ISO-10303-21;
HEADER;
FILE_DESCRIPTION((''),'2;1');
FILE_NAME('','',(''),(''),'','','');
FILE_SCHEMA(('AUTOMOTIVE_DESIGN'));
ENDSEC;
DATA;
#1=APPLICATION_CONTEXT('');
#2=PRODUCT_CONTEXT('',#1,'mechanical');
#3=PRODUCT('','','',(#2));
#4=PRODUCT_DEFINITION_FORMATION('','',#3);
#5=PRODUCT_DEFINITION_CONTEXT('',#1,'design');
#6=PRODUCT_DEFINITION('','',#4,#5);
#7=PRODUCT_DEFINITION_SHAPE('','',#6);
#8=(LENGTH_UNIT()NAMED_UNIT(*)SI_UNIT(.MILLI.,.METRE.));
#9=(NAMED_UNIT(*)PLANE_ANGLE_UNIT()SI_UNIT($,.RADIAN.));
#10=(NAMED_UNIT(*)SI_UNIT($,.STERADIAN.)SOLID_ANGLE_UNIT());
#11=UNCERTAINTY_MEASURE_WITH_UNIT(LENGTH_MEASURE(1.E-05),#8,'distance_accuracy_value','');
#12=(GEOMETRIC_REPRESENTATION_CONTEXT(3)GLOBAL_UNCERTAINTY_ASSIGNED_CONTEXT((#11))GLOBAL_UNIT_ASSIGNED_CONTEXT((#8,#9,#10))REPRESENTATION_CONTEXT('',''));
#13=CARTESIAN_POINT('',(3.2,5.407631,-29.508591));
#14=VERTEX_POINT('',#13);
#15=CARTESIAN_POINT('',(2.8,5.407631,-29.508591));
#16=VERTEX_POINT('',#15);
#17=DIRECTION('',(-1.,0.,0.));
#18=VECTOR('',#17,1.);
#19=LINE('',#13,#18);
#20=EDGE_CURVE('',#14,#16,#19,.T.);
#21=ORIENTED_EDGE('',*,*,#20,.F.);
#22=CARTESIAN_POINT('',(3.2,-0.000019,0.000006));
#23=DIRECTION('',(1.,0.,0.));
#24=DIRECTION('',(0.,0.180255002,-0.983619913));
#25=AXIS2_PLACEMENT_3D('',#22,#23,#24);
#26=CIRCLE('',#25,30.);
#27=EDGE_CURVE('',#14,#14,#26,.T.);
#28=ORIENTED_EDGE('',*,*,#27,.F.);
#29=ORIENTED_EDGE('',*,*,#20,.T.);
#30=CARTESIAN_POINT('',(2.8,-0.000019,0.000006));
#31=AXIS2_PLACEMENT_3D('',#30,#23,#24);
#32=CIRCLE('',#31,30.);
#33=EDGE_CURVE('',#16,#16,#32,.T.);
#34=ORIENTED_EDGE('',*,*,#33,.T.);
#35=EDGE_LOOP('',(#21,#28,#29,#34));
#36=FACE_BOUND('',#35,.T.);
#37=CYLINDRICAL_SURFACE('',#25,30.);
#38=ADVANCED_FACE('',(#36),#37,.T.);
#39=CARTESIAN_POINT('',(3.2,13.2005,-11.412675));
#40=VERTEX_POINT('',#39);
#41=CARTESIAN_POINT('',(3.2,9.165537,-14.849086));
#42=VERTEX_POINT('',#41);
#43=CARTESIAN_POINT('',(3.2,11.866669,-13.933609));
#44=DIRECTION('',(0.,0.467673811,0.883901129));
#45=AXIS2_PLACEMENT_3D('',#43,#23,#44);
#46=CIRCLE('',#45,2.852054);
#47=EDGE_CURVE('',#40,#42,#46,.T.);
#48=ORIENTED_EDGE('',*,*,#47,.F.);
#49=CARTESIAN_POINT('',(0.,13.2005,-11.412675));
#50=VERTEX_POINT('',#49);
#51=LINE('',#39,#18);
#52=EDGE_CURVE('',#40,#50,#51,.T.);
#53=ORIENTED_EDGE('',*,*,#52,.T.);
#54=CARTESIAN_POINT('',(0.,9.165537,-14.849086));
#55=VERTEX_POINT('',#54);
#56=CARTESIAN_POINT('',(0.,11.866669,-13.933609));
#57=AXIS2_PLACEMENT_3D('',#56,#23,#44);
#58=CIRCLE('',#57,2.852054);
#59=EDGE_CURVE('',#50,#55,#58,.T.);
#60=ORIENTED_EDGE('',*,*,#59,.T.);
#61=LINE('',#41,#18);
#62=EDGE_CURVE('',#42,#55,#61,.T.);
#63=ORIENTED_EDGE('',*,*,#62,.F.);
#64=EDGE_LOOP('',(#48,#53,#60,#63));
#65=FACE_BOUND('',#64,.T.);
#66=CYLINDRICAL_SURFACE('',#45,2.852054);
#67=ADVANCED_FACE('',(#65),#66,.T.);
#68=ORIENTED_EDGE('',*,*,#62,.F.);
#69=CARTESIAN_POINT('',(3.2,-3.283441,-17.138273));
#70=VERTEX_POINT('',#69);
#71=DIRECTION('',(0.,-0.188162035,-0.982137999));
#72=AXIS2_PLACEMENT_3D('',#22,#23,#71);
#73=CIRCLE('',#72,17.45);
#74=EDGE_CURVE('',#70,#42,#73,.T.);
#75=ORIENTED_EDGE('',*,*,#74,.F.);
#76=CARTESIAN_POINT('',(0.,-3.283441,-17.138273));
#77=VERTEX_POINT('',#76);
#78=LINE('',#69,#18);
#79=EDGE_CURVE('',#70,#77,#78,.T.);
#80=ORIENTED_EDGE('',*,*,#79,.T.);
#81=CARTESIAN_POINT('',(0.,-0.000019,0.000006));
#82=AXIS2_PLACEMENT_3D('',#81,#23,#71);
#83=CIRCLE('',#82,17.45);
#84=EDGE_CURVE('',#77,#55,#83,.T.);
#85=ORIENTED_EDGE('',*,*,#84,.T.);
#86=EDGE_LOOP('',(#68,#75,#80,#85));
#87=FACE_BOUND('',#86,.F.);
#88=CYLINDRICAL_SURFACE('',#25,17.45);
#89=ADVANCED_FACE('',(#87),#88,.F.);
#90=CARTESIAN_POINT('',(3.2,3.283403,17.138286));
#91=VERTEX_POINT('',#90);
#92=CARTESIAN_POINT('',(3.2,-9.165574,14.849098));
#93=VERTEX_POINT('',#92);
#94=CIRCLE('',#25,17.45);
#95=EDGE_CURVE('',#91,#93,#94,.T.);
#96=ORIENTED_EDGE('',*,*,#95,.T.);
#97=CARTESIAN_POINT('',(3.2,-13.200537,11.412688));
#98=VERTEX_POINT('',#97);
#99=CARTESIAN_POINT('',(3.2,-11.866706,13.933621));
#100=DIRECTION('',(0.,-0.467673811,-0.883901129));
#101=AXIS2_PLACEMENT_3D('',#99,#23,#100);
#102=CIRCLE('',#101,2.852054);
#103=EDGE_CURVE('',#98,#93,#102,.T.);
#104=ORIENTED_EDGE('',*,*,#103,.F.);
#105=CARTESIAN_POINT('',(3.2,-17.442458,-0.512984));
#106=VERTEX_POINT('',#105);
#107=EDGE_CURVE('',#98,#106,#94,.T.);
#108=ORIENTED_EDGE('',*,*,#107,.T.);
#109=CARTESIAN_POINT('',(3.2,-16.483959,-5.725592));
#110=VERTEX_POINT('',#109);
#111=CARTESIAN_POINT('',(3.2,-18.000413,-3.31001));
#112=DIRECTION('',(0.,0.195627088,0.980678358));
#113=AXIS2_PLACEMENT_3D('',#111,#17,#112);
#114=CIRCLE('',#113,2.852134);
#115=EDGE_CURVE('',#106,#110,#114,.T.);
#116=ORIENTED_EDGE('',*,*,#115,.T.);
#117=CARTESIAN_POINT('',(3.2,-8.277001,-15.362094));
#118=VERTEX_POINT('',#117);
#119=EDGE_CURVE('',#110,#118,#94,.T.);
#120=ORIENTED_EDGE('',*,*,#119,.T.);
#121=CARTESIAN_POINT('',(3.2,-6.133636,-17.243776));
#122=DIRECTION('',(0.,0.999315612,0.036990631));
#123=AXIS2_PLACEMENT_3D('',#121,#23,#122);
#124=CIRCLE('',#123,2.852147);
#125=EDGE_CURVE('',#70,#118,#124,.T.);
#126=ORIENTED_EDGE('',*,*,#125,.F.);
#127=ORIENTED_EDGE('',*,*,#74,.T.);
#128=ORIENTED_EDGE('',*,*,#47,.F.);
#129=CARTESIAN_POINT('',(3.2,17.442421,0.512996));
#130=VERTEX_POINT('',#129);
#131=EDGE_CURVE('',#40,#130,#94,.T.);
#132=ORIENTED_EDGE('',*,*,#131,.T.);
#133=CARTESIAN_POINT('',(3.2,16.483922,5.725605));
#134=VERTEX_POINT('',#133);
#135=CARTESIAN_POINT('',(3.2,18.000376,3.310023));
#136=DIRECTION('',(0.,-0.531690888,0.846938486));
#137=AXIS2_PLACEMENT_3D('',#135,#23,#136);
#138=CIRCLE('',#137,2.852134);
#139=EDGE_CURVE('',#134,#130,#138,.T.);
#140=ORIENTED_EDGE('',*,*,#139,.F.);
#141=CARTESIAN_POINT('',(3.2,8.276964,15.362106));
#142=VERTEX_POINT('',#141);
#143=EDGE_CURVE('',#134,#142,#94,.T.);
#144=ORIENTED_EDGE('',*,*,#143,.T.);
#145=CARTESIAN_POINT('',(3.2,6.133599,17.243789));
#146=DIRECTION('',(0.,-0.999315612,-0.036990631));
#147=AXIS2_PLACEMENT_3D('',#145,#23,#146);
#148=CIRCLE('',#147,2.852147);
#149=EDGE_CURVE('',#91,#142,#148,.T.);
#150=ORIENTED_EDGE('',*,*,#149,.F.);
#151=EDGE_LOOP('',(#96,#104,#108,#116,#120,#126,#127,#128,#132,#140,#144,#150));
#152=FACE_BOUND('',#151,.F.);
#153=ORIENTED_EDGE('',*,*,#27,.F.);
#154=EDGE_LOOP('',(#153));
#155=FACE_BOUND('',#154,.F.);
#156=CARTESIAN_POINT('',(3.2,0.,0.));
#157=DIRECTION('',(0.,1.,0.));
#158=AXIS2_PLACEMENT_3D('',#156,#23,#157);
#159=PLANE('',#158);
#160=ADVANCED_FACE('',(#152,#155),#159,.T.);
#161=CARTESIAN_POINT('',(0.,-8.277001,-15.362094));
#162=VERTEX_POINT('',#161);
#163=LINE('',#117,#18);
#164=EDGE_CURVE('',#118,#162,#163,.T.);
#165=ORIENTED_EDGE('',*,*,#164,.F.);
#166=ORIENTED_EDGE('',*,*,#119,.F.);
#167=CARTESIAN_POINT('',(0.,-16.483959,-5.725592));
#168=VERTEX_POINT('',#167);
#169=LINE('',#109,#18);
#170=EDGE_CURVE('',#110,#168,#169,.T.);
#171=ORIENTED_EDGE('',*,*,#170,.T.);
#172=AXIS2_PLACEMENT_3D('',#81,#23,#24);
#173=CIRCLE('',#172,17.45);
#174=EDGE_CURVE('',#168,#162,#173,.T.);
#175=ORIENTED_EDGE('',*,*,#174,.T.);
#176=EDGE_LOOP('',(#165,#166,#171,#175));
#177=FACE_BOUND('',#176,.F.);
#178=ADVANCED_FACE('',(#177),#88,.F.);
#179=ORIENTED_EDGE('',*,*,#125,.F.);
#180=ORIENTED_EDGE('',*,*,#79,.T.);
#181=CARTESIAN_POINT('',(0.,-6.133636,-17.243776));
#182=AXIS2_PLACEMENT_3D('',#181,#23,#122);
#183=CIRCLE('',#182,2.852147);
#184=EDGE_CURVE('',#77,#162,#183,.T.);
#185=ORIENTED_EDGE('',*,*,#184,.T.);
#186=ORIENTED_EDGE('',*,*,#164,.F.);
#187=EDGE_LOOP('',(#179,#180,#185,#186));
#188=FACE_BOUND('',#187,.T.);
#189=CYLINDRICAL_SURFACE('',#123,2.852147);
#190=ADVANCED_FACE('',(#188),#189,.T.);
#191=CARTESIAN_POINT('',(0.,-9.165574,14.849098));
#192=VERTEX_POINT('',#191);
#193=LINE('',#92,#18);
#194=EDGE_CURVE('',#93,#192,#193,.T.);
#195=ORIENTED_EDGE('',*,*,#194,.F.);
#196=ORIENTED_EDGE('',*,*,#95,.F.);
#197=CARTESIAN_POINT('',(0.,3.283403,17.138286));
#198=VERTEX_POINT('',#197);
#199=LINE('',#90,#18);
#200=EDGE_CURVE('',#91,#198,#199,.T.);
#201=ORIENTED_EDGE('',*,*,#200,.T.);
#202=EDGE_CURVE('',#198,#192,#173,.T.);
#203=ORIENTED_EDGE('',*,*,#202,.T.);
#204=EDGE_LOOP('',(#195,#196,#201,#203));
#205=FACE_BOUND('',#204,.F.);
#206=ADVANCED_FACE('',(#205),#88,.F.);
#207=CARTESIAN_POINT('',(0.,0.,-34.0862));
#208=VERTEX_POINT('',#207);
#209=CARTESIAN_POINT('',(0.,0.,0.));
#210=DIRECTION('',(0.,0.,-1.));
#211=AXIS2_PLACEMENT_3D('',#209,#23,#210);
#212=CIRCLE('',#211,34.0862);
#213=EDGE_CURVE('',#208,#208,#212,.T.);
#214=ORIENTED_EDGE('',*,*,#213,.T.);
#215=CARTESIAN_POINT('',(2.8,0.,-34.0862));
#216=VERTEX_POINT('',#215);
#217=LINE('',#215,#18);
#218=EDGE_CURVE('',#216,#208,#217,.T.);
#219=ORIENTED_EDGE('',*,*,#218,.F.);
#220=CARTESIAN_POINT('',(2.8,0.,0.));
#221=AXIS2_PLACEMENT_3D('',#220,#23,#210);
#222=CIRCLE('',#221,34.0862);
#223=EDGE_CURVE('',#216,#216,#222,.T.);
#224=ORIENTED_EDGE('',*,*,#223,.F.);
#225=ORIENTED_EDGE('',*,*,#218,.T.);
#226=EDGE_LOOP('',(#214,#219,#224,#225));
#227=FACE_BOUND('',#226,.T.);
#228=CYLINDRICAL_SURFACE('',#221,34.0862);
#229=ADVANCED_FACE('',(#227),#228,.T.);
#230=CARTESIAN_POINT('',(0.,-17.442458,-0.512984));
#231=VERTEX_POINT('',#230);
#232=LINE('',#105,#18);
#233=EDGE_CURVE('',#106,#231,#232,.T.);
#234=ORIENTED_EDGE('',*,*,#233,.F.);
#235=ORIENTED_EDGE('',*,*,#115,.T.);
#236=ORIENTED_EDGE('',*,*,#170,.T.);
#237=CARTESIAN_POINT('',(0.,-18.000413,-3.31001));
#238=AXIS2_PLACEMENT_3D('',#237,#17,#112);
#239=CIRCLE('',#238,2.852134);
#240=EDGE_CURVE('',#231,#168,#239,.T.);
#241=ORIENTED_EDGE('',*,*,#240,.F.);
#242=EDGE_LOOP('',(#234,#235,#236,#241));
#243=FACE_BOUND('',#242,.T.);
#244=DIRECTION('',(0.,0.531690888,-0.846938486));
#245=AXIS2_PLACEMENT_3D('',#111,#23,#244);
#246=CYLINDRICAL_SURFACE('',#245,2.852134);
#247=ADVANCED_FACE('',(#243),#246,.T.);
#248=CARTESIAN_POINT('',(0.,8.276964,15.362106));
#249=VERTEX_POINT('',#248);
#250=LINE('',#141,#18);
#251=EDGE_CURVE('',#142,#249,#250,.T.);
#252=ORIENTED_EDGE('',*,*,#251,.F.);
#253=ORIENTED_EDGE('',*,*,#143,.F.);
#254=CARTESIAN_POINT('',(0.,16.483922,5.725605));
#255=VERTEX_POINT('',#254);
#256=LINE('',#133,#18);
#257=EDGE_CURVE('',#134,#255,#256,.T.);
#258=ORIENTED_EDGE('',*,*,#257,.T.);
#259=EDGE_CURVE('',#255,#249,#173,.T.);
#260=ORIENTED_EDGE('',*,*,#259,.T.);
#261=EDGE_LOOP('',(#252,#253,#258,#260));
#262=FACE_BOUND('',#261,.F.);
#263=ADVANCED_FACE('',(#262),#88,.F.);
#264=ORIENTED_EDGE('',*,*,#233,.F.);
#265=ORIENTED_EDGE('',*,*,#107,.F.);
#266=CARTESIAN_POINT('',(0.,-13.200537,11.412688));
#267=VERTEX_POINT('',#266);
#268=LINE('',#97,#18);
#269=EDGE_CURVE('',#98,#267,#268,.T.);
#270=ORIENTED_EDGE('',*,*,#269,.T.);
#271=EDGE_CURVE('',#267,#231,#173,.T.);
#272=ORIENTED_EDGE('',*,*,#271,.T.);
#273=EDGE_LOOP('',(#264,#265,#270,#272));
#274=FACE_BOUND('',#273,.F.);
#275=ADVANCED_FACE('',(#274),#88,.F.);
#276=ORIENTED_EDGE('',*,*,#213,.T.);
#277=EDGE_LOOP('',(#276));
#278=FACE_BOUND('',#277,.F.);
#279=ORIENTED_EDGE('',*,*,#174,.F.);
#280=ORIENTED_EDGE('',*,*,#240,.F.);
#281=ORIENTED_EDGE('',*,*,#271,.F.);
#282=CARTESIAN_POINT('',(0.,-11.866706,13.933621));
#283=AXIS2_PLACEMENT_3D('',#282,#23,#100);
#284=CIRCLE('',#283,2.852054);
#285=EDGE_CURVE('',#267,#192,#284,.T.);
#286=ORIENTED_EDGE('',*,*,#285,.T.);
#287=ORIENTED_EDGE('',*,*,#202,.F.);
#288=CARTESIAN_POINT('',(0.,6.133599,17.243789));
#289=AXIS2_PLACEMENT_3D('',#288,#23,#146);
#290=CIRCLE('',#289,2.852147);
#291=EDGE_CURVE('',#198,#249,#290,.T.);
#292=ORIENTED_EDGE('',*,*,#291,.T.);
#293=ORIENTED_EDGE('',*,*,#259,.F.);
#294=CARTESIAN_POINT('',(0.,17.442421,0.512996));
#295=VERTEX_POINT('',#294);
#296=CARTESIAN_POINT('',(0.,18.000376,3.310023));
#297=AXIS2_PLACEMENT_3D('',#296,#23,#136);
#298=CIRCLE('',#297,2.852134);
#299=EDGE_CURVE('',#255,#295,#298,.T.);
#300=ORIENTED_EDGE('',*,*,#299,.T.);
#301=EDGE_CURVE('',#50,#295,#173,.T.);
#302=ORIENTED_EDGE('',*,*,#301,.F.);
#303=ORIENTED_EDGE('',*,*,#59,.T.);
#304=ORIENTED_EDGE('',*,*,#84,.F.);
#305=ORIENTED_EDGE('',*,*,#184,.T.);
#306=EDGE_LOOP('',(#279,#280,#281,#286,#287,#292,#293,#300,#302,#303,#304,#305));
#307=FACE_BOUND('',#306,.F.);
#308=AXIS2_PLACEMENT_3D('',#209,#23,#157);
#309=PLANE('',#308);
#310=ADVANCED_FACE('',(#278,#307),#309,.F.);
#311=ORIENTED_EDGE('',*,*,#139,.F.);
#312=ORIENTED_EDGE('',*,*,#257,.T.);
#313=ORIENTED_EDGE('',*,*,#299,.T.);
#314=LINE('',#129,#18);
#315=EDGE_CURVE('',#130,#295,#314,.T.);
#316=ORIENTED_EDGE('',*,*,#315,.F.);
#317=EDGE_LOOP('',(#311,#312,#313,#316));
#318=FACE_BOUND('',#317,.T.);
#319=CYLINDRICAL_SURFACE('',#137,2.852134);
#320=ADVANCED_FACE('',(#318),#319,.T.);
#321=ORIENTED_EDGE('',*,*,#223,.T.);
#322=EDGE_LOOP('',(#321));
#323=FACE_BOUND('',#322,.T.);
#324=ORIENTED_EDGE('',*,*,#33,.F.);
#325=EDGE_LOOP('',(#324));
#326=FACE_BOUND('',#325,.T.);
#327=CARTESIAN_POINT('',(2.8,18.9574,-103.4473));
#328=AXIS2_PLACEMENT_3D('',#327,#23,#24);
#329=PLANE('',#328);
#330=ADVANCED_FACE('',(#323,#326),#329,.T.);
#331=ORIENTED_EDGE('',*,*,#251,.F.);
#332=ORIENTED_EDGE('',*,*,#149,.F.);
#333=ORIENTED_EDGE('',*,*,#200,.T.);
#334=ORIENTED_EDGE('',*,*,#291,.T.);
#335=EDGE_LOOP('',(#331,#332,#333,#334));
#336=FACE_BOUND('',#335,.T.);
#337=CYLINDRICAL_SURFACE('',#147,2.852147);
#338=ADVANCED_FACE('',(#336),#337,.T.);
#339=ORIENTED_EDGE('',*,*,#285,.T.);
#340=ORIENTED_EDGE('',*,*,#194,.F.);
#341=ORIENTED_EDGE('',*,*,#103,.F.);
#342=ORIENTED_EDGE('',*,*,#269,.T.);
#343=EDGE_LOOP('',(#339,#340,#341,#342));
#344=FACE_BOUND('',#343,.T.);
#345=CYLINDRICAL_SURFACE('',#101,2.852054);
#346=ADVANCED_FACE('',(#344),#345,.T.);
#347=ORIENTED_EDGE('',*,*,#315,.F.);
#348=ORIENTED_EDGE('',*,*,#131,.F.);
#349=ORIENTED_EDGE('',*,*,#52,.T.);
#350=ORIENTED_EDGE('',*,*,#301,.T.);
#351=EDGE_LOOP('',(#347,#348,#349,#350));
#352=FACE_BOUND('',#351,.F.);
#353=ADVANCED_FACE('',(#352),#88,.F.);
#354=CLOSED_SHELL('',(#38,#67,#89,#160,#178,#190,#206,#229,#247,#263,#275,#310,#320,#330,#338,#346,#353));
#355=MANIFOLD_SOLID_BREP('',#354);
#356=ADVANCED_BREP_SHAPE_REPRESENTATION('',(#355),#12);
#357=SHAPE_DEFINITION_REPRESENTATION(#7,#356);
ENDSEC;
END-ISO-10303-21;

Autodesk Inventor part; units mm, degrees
ref_plane "YZ Plane" through (0, 0, 0) normal (1, 0, 0) x (0, 1, 0)
ref_plane "XZ Plane" through (0, 0, 0) normal (0, 1, 0) x (-1, 0, 0)
ref_plane "XY Plane" through (0, 0, 0) normal (0, 0, 1) x (1, 0, 0)
sketch "Sketch_1" plane through (0, 0, 0) normal (0, 0, 1) x (1, 0, 0)
  line L0 (7.2, 0) -> (0, 0)
  line L1 (0, 8.5) -> (3.2, 8.5)
  line L2 (3.2, 8.5) -> (3.2, 105.8394)
  arc A0 (3.2, 105.8394) -> (2.2899, 109) centre (-4.7294, 105.2675) ccw
  line L3 (2.2899, 109) -> (0.7899, 109)
  arc A1 (0.7899, 109) -> (0, 105.8394) centre (7.9441, 105.5329) ccw
  line L4 (0, 105.8394) -> (0, 8.5)
  dimension "d16" = 1.5
  dimension "d17" = 3.2
revolve "Revolution1" add sketch "Sketch_1" angle 360 about axis through (7.2, 0, 0) along (1, 0, 0)
sketch "Sketch_2" plane through (3.6, 0, 0) normal (1, 0, 0) x (0, 0, -1)
  circle A0 centre (0, 0) radius 145.3333
  arc A1 (-108.9989, 0.5) -> (-108.9989, -0.5) centre (0, 0) ccw
  line L0 (-108.9989, -0.5) -> (-103.5248, -2.6502)
  arc A2 (-103.0895, -9.8477) -> (-103.5248, -2.6502) centre (-104.9781, -6.35) ccw
  line L1 (-103.0895, -9.8477) -> (-108.2644, -12.642)
  arc A3 (-108.2644, -12.642) -> (-108.1439, -13.6347) centre (0, 0) ccw
  line L2 (-108.1439, -13.6347) -> (-102.4506, -15.1094)
  arc A4 (-101.1508, -22.2019) -> (-102.4506, -15.1094) centre (-103.4473, -18.9574) ccw
  line L3 (-101.1508, -22.2019) -> (-105.9512, -25.5997)
  arc A5 (-105.9512, -25.5997) -> (-105.7119, -26.5706) centre (0, 0) ccw
  line L4 (-105.7119, -26.5706) -> (-99.8824, -27.3483)
  arc A6 (-97.7372, -34.2324) -> (-99.8824, -27.3483) centre (-100.408, -31.2884) ccw
  line L5 (-97.7372, -34.2324) -> (-102.093, -38.184)
  arc A7 (-102.093, -38.184) -> (-101.7384, -39.119) centre (0, 0) ccw
  line L6 (-101.7384, -39.119) -> (-95.8576, -39.1884)
  arc A8 (-92.8983, -45.7638) -> (-95.8576, -39.1884) centre (-95.9045, -43.1631) ccw
  line L7 (-92.8983, -45.7638) -> (-96.7461, -50.2116)
  arc A9 (-96.7461, -50.2116) -> (-96.2813, -51.097) centre (0, 0) ccw
  line L8 (-96.2813, -51.097) -> (-90.4351, -50.457)
  arc A10 (-86.7048, -56.6277) -> (-90.4351, -50.457) centre (-90.0025, -54.4084) ccw
  line L9 (-86.7048, -56.6277) -> (-89.9883, -61.5069)
  arc A11 (-89.9883, -61.5069) -> (-89.4203, -62.3299) centre (0, 0) ccw
  line L10 (-89.4203, -62.3299) -> (-83.6938, -60.9899)
  arc A12 (-79.2469, -66.666) -> (-83.6938, -60.9899) centre (-82.7881, -64.8603) ccw
  line L11 (-79.2469, -66.666) -> (-81.9184, -71.9054)
  arc A13 (-81.9184, -71.9054) -> (-81.2553, -72.6539) centre (0, 0) ccw
  line L12 (-81.2553, -72.6539) -> (-75.732, -70.6334)
  arc A14 (-70.6334, -75.732) -> (-75.732, -70.6334) centre (-74.3664, -74.3664) ccw
  line L13 (-70.6334, -75.732) -> (-72.6539, -81.2553)
  arc A15 (-72.6539, -81.2553) -> (-71.9054, -81.9184) centre (0, 0) ccw
  line L14 (-71.9054, -81.9184) -> (-66.666, -79.2469)
  arc A16 (-60.9899, -83.6938) -> (-66.666, -79.2469) centre (-64.8603, -82.7881) ccw
  line L15 (-60.9899, -83.6938) -> (-62.3299, -89.4203)
  arc A17 (-62.3299, -89.4203) -> (-61.5069, -89.9883) centre (0, 0) ccw
  line L16 (-61.5069, -89.9883) -> (-56.6277, -86.7048)
  arc A18 (-50.457, -90.4351) -> (-56.6277, -86.7048) centre (-54.4084, -90.0025) ccw
  line L17 (-50.457, -90.4351) -> (-51.097, -96.2813)
  arc A19 (-51.097, -96.2813) -> (-50.2116, -96.7461) centre (0, 0) ccw
  line L18 (-50.2116, -96.7461) -> (-45.7638, -92.8983)
  arc A20 (-39.1884, -95.8576) -> (-45.7638, -92.8983) centre (-43.1631, -95.9045) ccw
  line L19 (-39.1884, -95.8576) -> (-39.119, -101.7384)
  arc A21 (-39.119, -101.7384) -> (-38.184, -102.093) centre (0, 0) ccw
  line L20 (-38.184, -102.093) -> (-34.2324, -97.7372)
  arc A22 (-27.3483, -99.8824) -> (-34.2324, -97.7372) centre (-31.2884, -100.408) ccw
  line L21 (-27.3483, -99.8824) -> (-26.5706, -105.7119)
  arc A23 (-26.5706, -105.7119) -> (-25.5997, -105.9512) centre (0, 0) ccw
  line L22 (-25.5997, -105.9512) -> (-22.2019, -101.1508)
  arc A24 (-15.1094, -102.4506) -> (-22.2019, -101.1508) centre (-18.9574, -103.4473) ccw
  line L23 (-15.1094, -102.4506) -> (-13.6347, -108.1439)
  arc A25 (-13.6347, -108.1439) -> (-12.642, -108.2644) centre (0, 0) ccw
  line L24 (-12.642, -108.2644) -> (-9.8477, -103.0895)
  arc A26 (-2.6502, -103.5248) -> (-9.8477, -103.0895) centre (-6.35, -104.9781) ccw
  line L25 (-2.6502, -103.5248) -> (-0.5, -108.9989)
  arc A27 (-0.5, -108.9989) -> (0.5, -108.9989) centre (0, 0) ccw
  line L26 (0.5, -108.9989) -> (2.6502, -103.5248)
  arc A28 (9.8477, -103.0895) -> (2.6502, -103.5248) centre (6.35, -104.9781) ccw
  line L27 (9.8477, -103.0895) -> (12.642, -108.2644)
  arc A29 (12.642, -108.2644) -> (13.6347, -108.1439) centre (0, 0) ccw
  line L28 (13.6347, -108.1439) -> (15.1094, -102.4506)
  arc A30 (22.2019, -101.1508) -> (15.1094, -102.4506) centre (18.9574, -103.4473) ccw
  line L29 (22.2019, -101.1508) -> (25.5997, -105.9512)
  arc A31 (25.5997, -105.9512) -> (26.5706, -105.7119) centre (0, 0) ccw
  line L30 (26.5706, -105.7119) -> (27.3483, -99.8824)
  arc A32 (34.2324, -97.7372) -> (27.3483, -99.8824) centre (31.2884, -100.408) ccw
  line L31 (34.2324, -97.7372) -> (38.184, -102.093)
  arc A33 (38.184, -102.093) -> (39.119, -101.7384) centre (0, 0) ccw
  line L32 (39.119, -101.7384) -> (39.1884, -95.8576)
  arc A34 (45.7638, -92.8983) -> (39.1884, -95.8576) centre (43.1631, -95.9045) ccw
  line L33 (45.7638, -92.8983) -> (50.2116, -96.7461)
  arc A35 (50.2116, -96.7461) -> (51.097, -96.2813) centre (0, 0) ccw
  line L34 (51.097, -96.2813) -> (50.457, -90.4351)
  arc A36 (56.6277, -86.7048) -> (50.457, -90.4351) centre (54.4084, -90.0025) ccw
  line L35 (56.6277, -86.7048) -> (61.5069, -89.9883)
  arc A37 (61.5069, -89.9883) -> (62.3299, -89.4203) centre (0, 0) ccw
  line L36 (62.3299, -89.4203) -> (60.9899, -83.6938)
  arc A38 (66.666, -79.2469) -> (60.9899, -83.6938) centre (64.8603, -82.7881) ccw
  line L37 (66.666, -79.2469) -> (71.9054, -81.9184)
  arc A39 (71.9054, -81.9184) -> (72.6539, -81.2553) centre (0, 0) ccw
  line L38 (72.6539, -81.2553) -> (70.6334, -75.732)
  arc A40 (75.732, -70.6334) -> (70.6334, -75.732) centre (74.3664, -74.3664) ccw
  line L39 (75.732, -70.6334) -> (81.2553, -72.6539)
  arc A41 (81.2553, -72.6539) -> (81.9184, -71.9054) centre (0, 0) ccw
  line L40 (81.9184, -71.9054) -> (79.2469, -66.666)
  arc A42 (83.6938, -60.9899) -> (79.2469, -66.666) centre (82.7881, -64.8603) ccw
  line L41 (83.6938, -60.9899) -> (89.4203, -62.3299)
  arc A43 (89.4203, -62.3299) -> (89.9883, -61.5069) centre (0, 0) ccw
  line L42 (89.9883, -61.5069) -> (86.7048, -56.6277)
  arc A44 (90.4351, -50.457) -> (86.7048, -56.6277) centre (90.0025, -54.4084) ccw
  line L43 (90.4351, -50.457) -> (96.2813, -51.097)
  arc A45 (96.2813, -51.097) -> (96.7461, -50.2116) centre (0, 0) ccw
  line L44 (96.7461, -50.2116) -> (92.8983, -45.7638)
  arc A46 (95.8576, -39.1884) -> (92.8983, -45.7638) centre (95.9045, -43.1631) ccw
  line L45 (95.8576, -39.1884) -> (101.7384, -39.119)
  arc A47 (101.7384, -39.119) -> (102.093, -38.184) centre (0, 0) ccw
  line L46 (102.093, -38.184) -> (97.7372, -34.2324)
  arc A48 (99.8824, -27.3483) -> (97.7372, -34.2324) centre (100.408, -31.2884) ccw
  line L47 (99.8824, -27.3483) -> (105.7119, -26.5706)
  arc A49 (105.7119, -26.5706) -> (105.9512, -25.5997) centre (0, 0) ccw
  line L48 (105.9512, -25.5997) -> (101.1508, -22.2019)
  arc A50 (102.4506, -15.1094) -> (101.1508, -22.2019) centre (103.4473, -18.9574) ccw
  line L49 (102.4506, -15.1094) -> (108.1439, -13.6347)
  arc A51 (108.1439, -13.6347) -> (108.2644, -12.642) centre (0, 0) ccw
  line L50 (108.2644, -12.642) -> (103.0895, -9.8477)
  arc A52 (103.5248, -2.6502) -> (103.0895, -9.8477) centre (104.9781, -6.35) ccw
  line L51 (103.5248, -2.6502) -> (108.9989, -0.5)
  arc A53 (108.9989, -0.5) -> (108.9989, 0.5) centre (0, 0) ccw
  line L52 (108.9989, 0.5) -> (103.5248, 2.6502)
  arc A54 (103.0895, 9.8477) -> (103.5248, 2.6502) centre (104.9781, 6.35) ccw
  line L53 (103.0895, 9.8477) -> (108.2644, 12.642)
  arc A55 (108.2644, 12.642) -> (108.1439, 13.6347) centre (0, 0) ccw
  line L54 (108.1439, 13.6347) -> (102.4506, 15.1094)
  arc A56 (101.1508, 22.2019) -> (102.4506, 15.1094) centre (103.4473, 18.9574) ccw
  line L55 (101.1508, 22.2019) -> (105.9512, 25.5997)
  arc A57 (105.9512, 25.5997) -> (105.7119, 26.5706) centre (0, 0) ccw
  line L56 (105.7119, 26.5706) -> (99.8824, 27.3483)
  arc A58 (97.7372, 34.2324) -> (99.8824, 27.3483) centre (100.408, 31.2884) ccw
  line L57 (97.7372, 34.2324) -> (102.093, 38.184)
  arc A59 (102.093, 38.184) -> (101.7384, 39.119) centre (0, 0) ccw
  line L58 (101.7384, 39.119) -> (95.8576, 39.1884)
  arc A60 (92.8983, 45.7638) -> (95.8576, 39.1884) centre (95.9045, 43.1631) ccw
  line L59 (92.8983, 45.7638) -> (96.7461, 50.2116)
  arc A61 (96.7461, 50.2116) -> (96.2813, 51.097) centre (0, 0) ccw
  line L60 (96.2813, 51.097) -> (90.4351, 50.457)
  arc A62 (86.7048, 56.6277) -> (90.4351, 50.457) centre (90.0025, 54.4084) ccw
  line L61 (86.7048, 56.6277) -> (89.9883, 61.5069)
  arc A63 (89.9883, 61.5069) -> (89.4203, 62.3299) centre (0, 0) ccw
  line L62 (89.4203, 62.3299) -> (83.6938, 60.9899)
  arc A64 (79.2469, 66.666) -> (83.6938, 60.9899) centre (82.7881, 64.8603) ccw
  line L63 (79.2469, 66.666) -> (81.9184, 71.9054)
  arc A65 (81.9184, 71.9054) -> (81.2553, 72.6539) centre (0, 0) ccw
  line L64 (81.2553, 72.6539) -> (75.732, 70.6334)
  arc A66 (70.6334, 75.732) -> (75.732, 70.6334) centre (74.3664, 74.3664) ccw
  line L65 (70.6334, 75.732) -> (72.6539, 81.2553)
  arc A67 (72.6539, 81.2553) -> (71.9054, 81.9184) centre (0, 0) ccw
  line L66 (71.9054, 81.9184) -> (66.666, 79.2469)
  arc A68 (60.9899, 83.6938) -> (66.666, 79.2469) centre (64.8603, 82.7881) ccw
  line L67 (60.9899, 83.6938) -> (62.3299, 89.4203)
  arc A69 (62.3299, 89.4203) -> (61.5069, 89.9883) centre (0, 0) ccw
  line L68 (61.5069, 89.9883) -> (56.6277, 86.7048)
  arc A70 (50.457, 90.4351) -> (56.6277, 86.7048) centre (54.4084, 90.0025) ccw
  line L69 (50.457, 90.4351) -> (51.097, 96.2813)
  arc A71 (51.097, 96.2813) -> (50.2116, 96.7461) centre (0, 0) ccw
  line L70 (50.2116, 96.7461) -> (45.7638, 92.8983)
  arc A72 (39.1884, 95.8576) -> (45.7638, 92.8983) centre (43.1631, 95.9045) ccw
  line L71 (39.1884, 95.8576) -> (39.119, 101.7384)
  arc A73 (39.119, 101.7384) -> (38.184, 102.093) centre (0, 0) ccw
  line L72 (38.184, 102.093) -> (34.2324, 97.7372)
  arc A74 (27.3483, 99.8824) -> (34.2324, 97.7372) centre (31.2884, 100.408) ccw
  line L73 (27.3483, 99.8824) -> (26.5706, 105.7119)
  arc A75 (26.5706, 105.7119) -> (25.5997, 105.9512) centre (0, 0) ccw
  line L74 (25.5997, 105.9512) -> (22.2019, 101.1508)
  arc A76 (15.1094, 102.4506) -> (22.2019, 101.1508) centre (18.9574, 103.4473) ccw
  line L75 (15.1094, 102.4506) -> (13.6347, 108.1439)
  arc A77 (13.6347, 108.1439) -> (12.642, 108.2644) centre (0, 0) ccw
  line L76 (12.642, 108.2644) -> (9.8477, 103.0895)
  arc A78 (2.6502, 103.5248) -> (9.8477, 103.0895) centre (6.35, 104.9781) ccw
  line L77 (2.6502, 103.5248) -> (0.5, 108.9989)
  arc A79 (0.5, 108.9989) -> (-0.5, 108.9989) centre (0, 0) ccw
  line L78 (-0.5, 108.9989) -> (-2.6502, 103.5248)
  arc A80 (-9.8477, 103.0895) -> (-2.6502, 103.5248) centre (-6.35, 104.9781) ccw
  line L79 (-9.8477, 103.0895) -> (-12.642, 108.2644)
  arc A81 (-12.642, 108.2644) -> (-13.6347, 108.1439) centre (0, 0) ccw
  line L80 (-13.6347, 108.1439) -> (-15.1094, 102.4506)
  arc A82 (-22.2019, 101.1508) -> (-15.1094, 102.4506) centre (-18.9574, 103.4473) ccw
  line L81 (-22.2019, 101.1508) -> (-25.5997, 105.9512)
  arc A83 (-25.5997, 105.9512) -> (-26.5706, 105.7119) centre (0, 0) ccw
  line L82 (-26.5706, 105.7119) -> (-27.3483, 99.8824)
  arc A84 (-34.2324, 97.7372) -> (-27.3483, 99.8824) centre (-31.2884, 100.408) ccw
  line L83 (-34.2324, 97.7372) -> (-38.184, 102.093)
  arc A85 (-38.184, 102.093) -> (-39.119, 101.7384) centre (0, 0) ccw
  line L84 (-39.119, 101.7384) -> (-39.1884, 95.8576)
  arc A86 (-45.7638, 92.8983) -> (-39.1884, 95.8576) centre (-43.1631, 95.9045) ccw
  line L85 (-45.7638, 92.8983) -> (-50.2116, 96.7461)
  arc A87 (-50.2116, 96.7461) -> (-51.097, 96.2813) centre (0, 0) ccw
  line L86 (-51.097, 96.2813) -> (-50.457, 90.4351)
  arc A88 (-56.6277, 86.7048) -> (-50.457, 90.4351) centre (-54.4084, 90.0025) ccw
  line L87 (-56.6277, 86.7048) -> (-61.5069, 89.9883)
  arc A89 (-61.5069, 89.9883) -> (-62.3299, 89.4203) centre (0, 0) ccw
  line L88 (-62.3299, 89.4203) -> (-60.9899, 83.6938)
  arc A90 (-66.666, 79.2469) -> (-60.9899, 83.6938) centre (-64.8603, 82.7881) ccw
  line L89 (-66.666, 79.2469) -> (-71.9054, 81.9184)
  arc A91 (-71.9054, 81.9184) -> (-72.6539, 81.2553) centre (0, 0) ccw
  line L90 (-72.6539, 81.2553) -> (-70.6334, 75.732)
  arc A92 (-75.732, 70.6334) -> (-70.6334, 75.732) centre (-74.3664, 74.3664) ccw
  line L91 (-75.732, 70.6334) -> (-81.2553, 72.6539)
  arc A93 (-81.2553, 72.6539) -> (-81.9184, 71.9054) centre (0, 0) ccw
  line L92 (-81.9184, 71.9054) -> (-79.2469, 66.666)
  arc A94 (-83.6938, 60.9899) -> (-79.2469, 66.666) centre (-82.7881, 64.8603) ccw
  line L93 (-83.6938, 60.9899) -> (-89.4203, 62.3299)
  arc A95 (-89.4203, 62.3299) -> (-89.9883, 61.5069) centre (0, 0) ccw
  line L94 (-89.9883, 61.5069) -> (-86.7048, 56.6277)
  arc A96 (-90.4351, 50.457) -> (-86.7048, 56.6277) centre (-90.0025, 54.4084) ccw
  line L95 (-90.4351, 50.457) -> (-96.2813, 51.097)
  arc A97 (-96.2813, 51.097) -> (-96.7461, 50.2116) centre (0, 0) ccw
  line L96 (-96.7461, 50.2116) -> (-92.8983, 45.7638)
  arc A98 (-95.8576, 39.1884) -> (-92.8983, 45.7638) centre (-95.9045, 43.1631) ccw
  line L97 (-95.8576, 39.1884) -> (-101.7384, 39.119)
  arc A99 (-101.7384, 39.119) -> (-102.093, 38.184) centre (0, 0) ccw
  line L98 (-102.093, 38.184) -> (-97.7372, 34.2324)
  arc A100 (-99.8824, 27.3483) -> (-97.7372, 34.2324) centre (-100.408, 31.2884) ccw
  line L99 (-99.8824, 27.3483) -> (-105.7119, 26.5706)
  arc A101 (-105.7119, 26.5706) -> (-105.9512, 25.5997) centre (0, 0) ccw
  line L100 (-105.9512, 25.5997) -> (-101.1508, 22.2019)
  arc A102 (-102.4506, 15.1094) -> (-101.1508, 22.2019) centre (-103.4473, 18.9574) ccw
  line L101 (-102.4506, 15.1094) -> (-108.1439, 13.6347)
  arc A103 (-108.1439, 13.6347) -> (-108.2644, 12.642) centre (0, 0) ccw
  line L102 (-108.2644, 12.642) -> (-103.0895, 9.8477)
  arc A104 (-103.5248, 2.6502) -> (-103.0895, 9.8477) centre (-104.9781, 6.35) ccw
  line L103 (-103.5248, 2.6502) -> (-108.9989, 0.5)
extrude "Extrusion1" cut sketch "Sketch_2" along normal mid plane 7.6
sketch "スケッチ4" plane through (3.2, 18.9574, -103.4473) normal (1, 0, 0) x (0, 0.180255, -0.9836199)
  line L0 (-1.9941, -8.896) -> (0.3565, -8.1331) projected
  arc A0 (0.3565, -8.1331) -> (0.5674, -4.646) centre (-105.17, 0) ccw projected
  line L1 (0.5674, -4.646) -> (-1.674, -3.6053) projected
  arc A1 (-1.674, 3.6053) -> (-1.674, -3.6053) centre (0, 0) ccw projected
  line L2 (-1.674, 3.6053) -> (0.5674, 4.646) projected
  arc A2 (0.5674, 4.646) -> (0.3565, 8.1331) centre (-105.17, 0) ccw projected
  line L3 (0.3565, 8.1331) -> (-1.9941, 8.896) projected
  arc A3 (-2.8632, 16.0541) -> (-1.9941, 8.896) centre (-0.7668, 12.6768) ccw projected
  line L4 (-2.8632, 16.0541) -> (-0.7636, 17.3574) projected
  arc A4 (-0.7636, 17.3574) -> (-1.3933, 20.7936) centre (-105.17, 0) ccw projected
  line L5 (-1.3933, 20.7936) -> (-3.8186, 21.2677) projected
  arc A5 (-5.5442, 28.2688) -> (-3.8186, 21.2677) centre (-3.056, 25.1688) ccw projected
  line L6 (-5.5442, 28.2688) -> (-3.617, 29.8157) projected
  arc A6 (-3.617, 29.8157) -> (-4.6563, 33.1509) centre (-105.17, 0) ccw projected
  line L7 (-4.6563, 33.1509) -> (-7.1211, 33.3292) projected
  arc A7 (-9.678, 40.0712) -> (-7.1211, 33.3292) centre (-6.8343, 37.2938) ccw projected
  line L8 (-9.678, 40.0712) -> (-7.9513, 41.8391) projected
  arc A8 (-7.9513, 41.8391) -> (-9.3851, 45.0247) centre (-105.17, 0) ccw projected
  line L9 (-9.3851, 45.0247) -> (-11.8534, 44.9046) projected
  arc A9 (-15.2043, 51.2893) -> (-11.8534, 44.9046) centre (-12.0466, 48.8749) ccw projected
  line L10 (-15.2043, 51.2893) -> (-13.7033, 53.2525) projected
  arc A10 (-13.7033, 53.2525) -> (-15.5106, 56.2421) centre (-105.17, 0) ccw projected
  line L11 (-15.5106, 56.2421) -> (-17.9464, 55.8253) projected
  arc A11 (-22.0425, 61.7595) -> (-17.9464, 55.8253) centre (-18.6168, 59.7434) ccw projected
  line L12 (-22.0425, 61.7595) -> (-20.7891, 63.8893) projected
  arc A12 (-20.7891, 63.8893) -> (-22.9435, 66.6392) centre (-105.17, 0) ccw projected
  line L13 (-22.9435, 66.6392) -> (-25.3114, 65.9319) projected
  arc A13 (-30.0929, 71.3291) -> (-25.3114, 65.9319) centre (-26.4491, 69.7406) ccw projected
  line L14 (-30.0929, 71.3291) -> (-29.1053, 73.5945) projected
  arc A14 (-29.1053, 73.5945) -> (-31.5755, 76.0647) centre (-105.17, 0) ccw projected
  line L15 (-31.5755, 76.0647) -> (-33.8409, 75.0771) projected
  arc A15 (-39.2381, 79.8586) -> (-33.8409, 75.0771) centre (-35.4294, 78.7209) ccw projected
  line L16 (-39.2381, 79.8586) -> (-38.5308, 82.2265) projected
  arc A16 (-38.5308, 82.2265) -> (-41.2807, 84.3809) centre (-105.17, 0) ccw projected
  line L17 (-41.2807, 84.3809) -> (-43.4105, 83.1275) projected
  arc A17 (-49.3447, 87.2236) -> (-43.4105, 83.1275) centre (-45.4266, 86.5532) ccw projected
  line L18 (-49.3447, 87.2236) -> (-48.9279, 89.6594) projected
  arc A18 (-48.9279, 89.6594) -> (-51.9175, 91.4667) centre (-105.17, 0) ccw projected
  line L19 (-51.9175, 91.4667) -> (-53.8807, 89.9657) projected
  arc A19 (-60.2654, 93.3166) -> (-53.8807, 89.9657) centre (-56.2951, 93.1234) ccw projected
  line L20 (-60.2654, 93.3166) -> (-60.1453, 95.7849) projected
  arc A20 (-60.1453, 95.7849) -> (-63.3309, 97.2187) centre (-105.17, 0) ccw projected
  line L21 (-63.3309, 97.2187) -> (-65.0988, 95.492) projected
  arc A21 (-71.8408, 98.0489) -> (-65.0988, 95.492) centre (-67.8762, 98.3357) ccw projected
  line L22 (-71.8408, 98.0489) -> (-72.0191, 100.5137) projected
  arc A22 (-72.0191, 100.5137) -> (-75.3543, 101.553) centre (-105.17, 0) ccw projected
  line L23 (-75.3543, 101.553) -> (-76.9012, 99.6258) projected
  arc A23 (-83.9023, 101.3514) -> (-76.9012, 99.6258) centre (-80.0012, 102.114) ccw projected
  line L24 (-83.9023, 101.3514) -> (-84.3764, 103.7767) projected
  arc A24 (-84.3764, 103.7767) -> (-87.8126, 104.4064) centre (-105.17, 0) ccw projected
  line L25 (-87.8126, 104.4064) -> (-89.1159, 102.3068) projected
  arc A25 (-96.274, 103.1759) -> (-89.1159, 102.3068) centre (-92.4932, 104.4032) ccw projected
  line L26 (-96.274, 103.1759) -> (-97.0369, 105.5265) projected
  arc A26 (-97.0369, 105.5265) -> (-100.524, 105.7374) centre (-105.17, 0) ccw projected
  line L27 (-100.524, 105.7374) -> (-101.5647, 103.496) projected
  arc A27 (-108.7753, 103.496) -> (-101.5647, 103.496) centre (-105.17, 105.17) ccw projected
  line L28 (-108.7753, 103.496) -> (-109.816, 105.7374) projected
  arc A28 (-109.816, 105.7374) -> (-113.3031, 105.5265) centre (-105.17, 0) ccw projected
  line L29 (-113.3031, 105.5265) -> (-114.066, 103.1759) projected
  arc A29 (-121.2241, 102.3068) -> (-114.066, 103.1759) centre (-117.8468, 104.4032) ccw projected
  line L30 (-121.2241, 102.3068) -> (-122.5274, 104.4064) projected
  arc A30 (-122.5274, 104.4064) -> (-125.9636, 103.7767) centre (-105.17, 0) ccw projected
  line L31 (-125.9636, 103.7767) -> (-126.4377, 101.3514) projected
  arc A31 (-133.4388, 99.6258) -> (-126.4377, 101.3514) centre (-130.3388, 102.114) ccw projected
  line L32 (-133.4388, 99.6258) -> (-134.9857, 101.553) projected
  arc A32 (-134.9857, 101.553) -> (-138.3209, 100.5137) centre (-105.17, 0) ccw projected
  line L33 (-138.3209, 100.5137) -> (-138.4992, 98.0489) projected
  arc A33 (-145.2412, 95.492) -> (-138.4992, 98.0489) centre (-142.4638, 98.3357) ccw projected
  line L34 (-145.2412, 95.492) -> (-147.0091, 97.2187) projected
  arc A34 (-147.0091, 97.2187) -> (-150.1947, 95.7849) centre (-105.17, 0) ccw projected
  line L35 (-150.1947, 95.7849) -> (-150.0746, 93.3166) projected
  arc A35 (-156.4593, 89.9657) -> (-150.0746, 93.3166) centre (-154.0449, 93.1234) ccw projected
  line L36 (-156.4593, 89.9657) -> (-158.4225, 91.4667) projected
  arc A36 (-158.4225, 91.4667) -> (-161.4121, 89.6594) centre (-105.17, 0) ccw projected
  line L37 (-161.4121, 89.6594) -> (-160.9953, 87.2236) projected
  arc A37 (-166.9295, 83.1275) -> (-160.9953, 87.2236) centre (-164.9134, 86.5532) ccw projected
  line L38 (-166.9295, 83.1275) -> (-169.0593, 84.3809) projected
  arc A38 (-169.0593, 84.3809) -> (-171.8092, 82.2265) centre (-105.17, 0) ccw projected
  line L39 (-171.8092, 82.2265) -> (-171.1019, 79.8586) projected
  arc A39 (-176.4991, 75.0771) -> (-171.1019, 79.8586) centre (-174.9106, 78.7209) ccw projected
  line L40 (-176.4991, 75.0771) -> (-178.7645, 76.0647) projected
  arc A40 (-178.7645, 76.0647) -> (-181.2347, 73.5945) centre (-105.17, 0) ccw projected
  line L41 (-181.2347, 73.5945) -> (-180.2471, 71.3291) projected
  arc A41 (-185.0286, 65.9319) -> (-180.2471, 71.3291) centre (-183.8909, 69.7406) ccw projected
  line L42 (-185.0286, 65.9319) -> (-187.3965, 66.6392) projected
  arc A42 (-187.3965, 66.6392) -> (-189.5509, 63.8893) centre (-105.17, 0) ccw projected
  line L43 (-189.5509, 63.8893) -> (-188.2975, 61.7595) projected
  arc A43 (-192.3936, 55.8253) -> (-188.2975, 61.7595) centre (-191.7232, 59.7434) ccw projected
  line L44 (-192.3936, 55.8253) -> (-194.8294, 56.2421) projected
  arc A44 (-194.8294, 56.2421) -> (-196.6367, 53.2525) centre (-105.17, 0) ccw projected
  line L45 (-196.6367, 53.2525) -> (-195.1357, 51.2893) projected
  arc A45 (-198.4866, 44.9046) -> (-195.1357, 51.2893) centre (-198.2934, 48.8749) ccw projected
  line L46 (-198.4866, 44.9046) -> (-200.9549, 45.0247) projected
  arc A46 (-200.9549, 45.0247) -> (-202.3887, 41.8391) centre (-105.17, 0) ccw projected
  line L47 (-202.3887, 41.8391) -> (-200.662, 40.0712) projected
  arc A47 (-203.2189, 33.3292) -> (-200.662, 40.0712) centre (-203.5057, 37.2938) ccw projected
  line L48 (-203.2189, 33.3292) -> (-205.6837, 33.1509) projected
  arc A48 (-205.6837, 33.1509) -> (-206.723, 29.8157) centre (-105.17, 0) ccw projected
  line L49 (-206.723, 29.8157) -> (-204.7958, 28.2688) projected
  arc A49 (-206.5214, 21.2677) -> (-204.7958, 28.2688) centre (-207.284, 25.1688) ccw projected
  line L50 (-206.5214, 21.2677) -> (-208.9467, 20.7936) projected
  arc A50 (-208.9467, 20.7936) -> (-209.5764, 17.3574) centre (-105.17, 0) ccw projected
  line L51 (-209.5764, 17.3574) -> (-207.4768, 16.0541) projected
  arc A51 (-208.3459, 8.896) -> (-207.4768, 16.0541) centre (-209.5732, 12.6768) ccw projected
  line L52 (-208.3459, 8.896) -> (-210.6965, 8.1331) projected
  arc A52 (-210.6965, 8.1331) -> (-210.9074, 4.646) centre (-105.17, 0) ccw projected
  line L53 (-210.9074, 4.646) -> (-208.666, 3.6053) projected
  arc A53 (-208.666, -3.6053) -> (-208.666, 3.6053) centre (-210.34, 0) ccw projected
  line L54 (-208.666, -3.6053) -> (-210.9074, -4.646) projected
  arc A54 (-210.9074, -4.646) -> (-210.6965, -8.1331) centre (-105.17, 0) ccw projected
  line L55 (-210.6965, -8.1331) -> (-208.3459, -8.896) projected
  arc A55 (-207.4768, -16.0541) -> (-208.3459, -8.896) centre (-209.5732, -12.6768) ccw projected
  line L56 (-207.4768, -16.0541) -> (-209.5764, -17.3574) projected
  arc A56 (-209.5764, -17.3574) -> (-208.9467, -20.7936) centre (-105.17, 0) ccw projected
  line L57 (-208.9467, -20.7936) -> (-206.5214, -21.2677) projected
  arc A57 (-204.7958, -28.2688) -> (-206.5214, -21.2677) centre (-207.284, -25.1688) ccw projected
  line L58 (-204.7958, -28.2688) -> (-206.723, -29.8157) projected
  arc A58 (-206.723, -29.8157) -> (-205.6837, -33.1509) centre (-105.17, 0) ccw projected
  line L59 (-205.6837, -33.1509) -> (-203.2189, -33.3292) projected
  arc A59 (-200.662, -40.0712) -> (-203.2189, -33.3292) centre (-203.5057, -37.2938) ccw projected
  line L60 (-200.662, -40.0712) -> (-202.3887, -41.8391) projected
  arc A60 (-202.3887, -41.8391) -> (-200.9549, -45.0247) centre (-105.17, 0) ccw projected
  line L61 (-200.9549, -45.0247) -> (-198.4866, -44.9046) projected
  arc A61 (-195.1357, -51.2893) -> (-198.4866, -44.9046) centre (-198.2934, -48.8749) ccw projected
  line L62 (-195.1357, -51.2893) -> (-196.6367, -53.2525) projected
  arc A62 (-196.6367, -53.2525) -> (-194.8294, -56.2421) centre (-105.17, 0) ccw projected
  line L63 (-194.8294, -56.2421) -> (-192.3936, -55.8253) projected
  arc A63 (-188.2975, -61.7595) -> (-192.3936, -55.8253) centre (-191.7232, -59.7434) ccw projected
  line L64 (-188.2975, -61.7595) -> (-189.5509, -63.8893) projected
  arc A64 (-189.5509, -63.8893) -> (-187.3965, -66.6392) centre (-105.17, 0) ccw projected
  line L65 (-187.3965, -66.6392) -> (-185.0286, -65.9319) projected
  arc A65 (-180.2471, -71.3291) -> (-185.0286, -65.9319) centre (-183.8909, -69.7406) ccw projected
  line L66 (-180.2471, -71.3291) -> (-181.2347, -73.5945) projected
  arc A66 (-181.2347, -73.5945) -> (-178.7645, -76.0647) centre (-105.17, 0) ccw projected
  line L67 (-178.7645, -76.0647) -> (-176.4991, -75.0771) projected
  arc A67 (-171.1019, -79.8586) -> (-176.4991, -75.0771) centre (-174.9106, -78.7209) ccw projected
  line L68 (-171.1019, -79.8586) -> (-171.8092, -82.2265) projected
  arc A68 (-171.8092, -82.2265) -> (-169.0593, -84.3809) centre (-105.17, 0) ccw projected
  line L69 (-169.0593, -84.3809) -> (-166.9295, -83.1275) projected
  arc A69 (-160.9953, -87.2236) -> (-166.9295, -83.1275) centre (-164.9134, -86.5532) ccw projected
  line L70 (-160.9953, -87.2236) -> (-161.4121, -89.6594) projected
  arc A70 (-161.4121, -89.6594) -> (-158.4225, -91.4667) centre (-105.17, 0) ccw projected
  line L71 (-158.4225, -91.4667) -> (-156.4593, -89.9657) projected
  arc A71 (-150.0746, -93.3166) -> (-156.4593, -89.9657) centre (-154.0449, -93.1234) ccw projected
  line L72 (-150.0746, -93.3166) -> (-150.1947, -95.7849) projected
  arc A72 (-150.1947, -95.7849) -> (-147.0091, -97.2187) centre (-105.17, 0) ccw projected
  line L73 (-147.0091, -97.2187) -> (-145.2412, -95.492) projected
  arc A73 (-138.4992, -98.0489) -> (-145.2412, -95.492) centre (-142.4638, -98.3357) ccw projected
  line L74 (-138.4992, -98.0489) -> (-138.3209, -100.5137) projected
  arc A74 (-138.3209, -100.5137) -> (-134.9857, -101.553) centre (-105.17, 0) ccw projected
  line L75 (-134.9857, -101.553) -> (-133.4388, -99.6258) projected
  arc A75 (-126.4377, -101.3514) -> (-133.4388, -99.6258) centre (-130.3388, -102.114) ccw projected
  line L76 (-126.4377, -101.3514) -> (-125.9636, -103.7767) projected
  arc A76 (-125.9636, -103.7767) -> (-122.5274, -104.4064) centre (-105.17, 0) ccw projected
  line L77 (-122.5274, -104.4064) -> (-121.2241, -102.3068) projected
  arc A77 (-114.066, -103.1759) -> (-121.2241, -102.3068) centre (-117.8468, -104.4032) ccw projected
  line L78 (-114.066, -103.1759) -> (-113.3031, -105.5265) projected
  arc A78 (-113.3031, -105.5265) -> (-109.816, -105.7374) centre (-105.17, 0) ccw projected
  line L79 (-109.816, -105.7374) -> (-108.7753, -103.496) projected
  arc A79 (-101.5647, -103.496) -> (-108.7753, -103.496) centre (-105.17, -105.17) ccw projected
  line L80 (-101.5647, -103.496) -> (-100.524, -105.7374) projected
  arc A80 (-100.524, -105.7374) -> (-97.0369, -105.5265) centre (-105.17, 0) ccw projected
  line L81 (-97.0369, -105.5265) -> (-96.274, -103.1759) projected
  arc A81 (-89.1159, -102.3068) -> (-96.274, -103.1759) centre (-92.4932, -104.4032) ccw projected
  line L82 (-89.1159, -102.3068) -> (-87.8126, -104.4064) projected
  arc A82 (-87.8126, -104.4064) -> (-84.3764, -103.7767) centre (-105.17, 0) ccw projected
  line L83 (-84.3764, -103.7767) -> (-83.9023, -101.3514) projected
  arc A83 (-76.9012, -99.6258) -> (-83.9023, -101.3514) centre (-80.0012, -102.114) ccw projected
  line L84 (-76.9012, -99.6258) -> (-75.3543, -101.553) projected
  arc A84 (-75.3543, -101.553) -> (-72.0191, -100.5137) centre (-105.17, 0) ccw projected
  line L85 (-72.0191, -100.5137) -> (-71.8408, -98.0489) projected
  arc A85 (-65.0988, -95.492) -> (-71.8408, -98.0489) centre (-67.8762, -98.3357) ccw projected
  line L86 (-65.0988, -95.492) -> (-63.3309, -97.2187) projected
  arc A86 (-63.3309, -97.2187) -> (-60.1453, -95.7849) centre (-105.17, 0) ccw projected
  line L87 (-60.1453, -95.7849) -> (-60.2654, -93.3166) projected
  arc A87 (-53.8807, -89.9657) -> (-60.2654, -93.3166) centre (-56.2951, -93.1234) ccw projected
  line L88 (-53.8807, -89.9657) -> (-51.9175, -91.4667) projected
  arc A88 (-51.9175, -91.4667) -> (-48.9279, -89.6594) centre (-105.17, 0) ccw projected
  line L89 (-48.9279, -89.6594) -> (-49.3447, -87.2236) projected
  arc A89 (-43.4105, -83.1275) -> (-49.3447, -87.2236) centre (-45.4266, -86.5532) ccw projected
  line L90 (-43.4105, -83.1275) -> (-41.2807, -84.3809) projected
  arc A90 (-41.2807, -84.3809) -> (-38.5308, -82.2265) centre (-105.17, 0) ccw projected
  line L91 (-38.5308, -82.2265) -> (-39.2381, -79.8586) projected
  arc A91 (-33.8409, -75.0771) -> (-39.2381, -79.8586) centre (-35.4294, -78.7209) ccw projected
  line L92 (-33.8409, -75.0771) -> (-31.5755, -76.0647) projected
  arc A92 (-31.5755, -76.0647) -> (-29.1053, -73.5945) centre (-105.17, 0) ccw projected
  line L93 (-29.1053, -73.5945) -> (-30.0929, -71.3291) projected
  arc A93 (-25.3114, -65.9319) -> (-30.0929, -71.3291) centre (-26.4491, -69.7406) ccw projected
  line L94 (-25.3114, -65.9319) -> (-22.9435, -66.6392) projected
  arc A94 (-22.9435, -66.6392) -> (-20.7891, -63.8893) centre (-105.17, 0) ccw projected
  line L95 (-20.7891, -63.8893) -> (-22.0425, -61.7595) projected
  arc A95 (-17.9464, -55.8253) -> (-22.0425, -61.7595) centre (-18.6168, -59.7434) ccw projected
  line L96 (-17.9464, -55.8253) -> (-15.5106, -56.2421) projected
  arc A96 (-15.5106, -56.2421) -> (-13.7033, -53.2525) centre (-105.17, 0) ccw projected
  line L97 (-13.7033, -53.2525) -> (-15.2043, -51.2893) projected
  arc A97 (-11.8534, -44.9046) -> (-15.2043, -51.2893) centre (-12.0466, -48.8749) ccw projected
  line L98 (-11.8534, -44.9046) -> (-9.3851, -45.0247) projected
  arc A98 (-9.3851, -45.0247) -> (-7.9513, -41.8391) centre (-105.17, 0) ccw projected
  line L99 (-7.9513, -41.8391) -> (-9.678, -40.0712) projected
  arc A99 (-7.1211, -33.3292) -> (-9.678, -40.0712) centre (-6.8343, -37.2938) ccw projected
  line L100 (-7.1211, -33.3292) -> (-4.6563, -33.1509) projected
  arc A100 (-4.6563, -33.1509) -> (-3.617, -29.8157) centre (-105.17, 0) ccw projected
  line L101 (-3.617, -29.8157) -> (-5.5442, -28.2688) projected
  arc A101 (-3.8186, -21.2677) -> (-5.5442, -28.2688) centre (-3.056, -25.1688) ccw projected
  line L102 (-3.8186, -21.2677) -> (-1.3933, -20.7936) projected
  arc A102 (-1.3933, -20.7936) -> (-0.7636, -17.3574) centre (-105.17, 0) ccw projected
  line L103 (-0.7636, -17.3574) -> (-2.8632, -16.0541) projected
  arc A103 (-1.9941, -8.896) -> (-2.8632, -16.0541) centre (-0.7668, -12.6768) ccw projected
  circle A104 centre (-105.17, 0) radius 8.5 projected
  circle A105 centre (-105.17, 0) radius 8.5 projected
  line L104 (-105.1595, -17.45) -> (-105.1595, -15.45)
  arc A106 (-102.5095, -17.246) -> (-107.8095, -17.2492) centre (-105.1588, -18.3021) ccw
  line L105 (-107.8095, -16.9169) -> (-107.8095, -17.9831) construction
  line L106 (-102.5095, -17.9831) -> (-102.5095, -16.9169) construction
  line L107 (-107.8095, -17.9831) -> (-102.5095, -17.9831) construction
  line L108 (-107.8095, -16.9169) -> (-102.5095, -17.9831) construction
  line L109 (-102.5095, -16.9169) -> (-107.8095, -17.9831) construction
  line L110 (-102.5095, -16.9169) -> (-107.8095, -16.9169) construction
  arc A107 (-121.4357, 6.3189) -> (-118.7885, 10.9105) centre (-121.0257, 9.1414) ccw
  arc A108 (-107.8305, 17.246) -> (-102.5305, 17.2492) centre (-105.1812, 18.3021) ccw
  arc A109 (-91.5648, 10.9271) -> (-88.912, 6.3388) centre (-89.3255, 9.1607) ccw
  arc A110 (-88.9043, -6.3189) -> (-91.5515, -10.9105) centre (-89.3143, -9.1414) ccw
  arc A111 (-118.7752, -10.9271) -> (-121.428, -6.3388) centre (-121.0145, -9.1607) ccw
  circle A112 centre (-105.17, 0) radius 20
  circle A113 centre (-105.17, 0) radius 17.45
  circle A114 centre (-105.17, 0) radius 8.5
  circle A115 centre (-105.17, 0) radius 24.5
  circle A116 centre (-105.17, 0) radius 23
  circle A117 centre (-105.17, 0) radius 24.5
  circle A118 centre (-105.17, 0) radius 22.5
  point P0 (-118.5554, 7.7159)
  point P1 (-105.1805, 15.45)
  point P2 (-91.7952, 7.7341)
  point P3 (-91.7846, -7.7159)
  point P4 (-118.5448, -7.7341)
  point P5 (-91.5515, -10.9105)
  point P6 (-88.9043, -6.3189)
  point P7 (-88.912, 6.3388)
  point P8 (-91.5648, 10.9271)
  point P9 (-102.5305, 17.2492)
  point P10 (-107.8305, 17.246)
  point P11 (-118.7885, 10.9105)
  point P12 (-121.4357, 6.3189)
  point P13 (-121.428, -6.3388)
  point P14 (-118.7752, -10.9271)
  dimension "d20" = 34.9
  dimension "d21" = 2
  dimension "d22" = 5.3
  dimension "d23" = 360
  dimension "d24" = 40
  dimension "d25" = 49
  dimension "d26" = 46
  dimension "d29" = 2
extrude "押し出し2" cut sketch "スケッチ4" against normal through all contours A106 A113 A111 A107 A108 A109 A110
sketch "スケッチ5" plane through (3.2, 18.9574, -103.4473) normal (1, 0, 0) x (0, 0.180255, -0.9836199)
  circle A0 centre (-107.7065, 69.9311) radius 15
  circle A1 centre (-105.17, 0) radius 90
  circle A2 centre (-105.17, 0) radius 30
  dimension "d30" = 30
  dimension "d31" = 180
  dimension "d32" = 60
extrude "押し出し3" cut sketch "スケッチ5" against normal blind 0.4
extrude "押し出し4" cut sketch "スケッチ5" against normal through all contours A0
pattern_circular "円形状パターン1" count 6 over 360 about axis through (3.2, 0, 0) along (-1, 0, 0) of "押し出し4"
sketch "スケッチ6" plane through (2.8, 0, 0) normal (1, 0, 0) x (0, 0, -1)
  circle A0 centre (-15.1004, 68.3284) radius 15 projected
  circle A1 centre (-66.7243, 21.0869) radius 15 projected
  line L0 (-66.7243, 21.0869) -> (-15.1004, 68.3284)
  circle A2 centre (-31.4807, 34.4011) radius 10
  point P0 (0, 0)
  dimension "d40" = 20
extrude "押し出し5" cut sketch "スケッチ6" against normal through all contours A2
pattern_circular "円形状パターン2" count 6 over 360 about axis through (3.2, 0, 0) along (-1, 0, 0) of "押し出し5"
sketch "スケッチ7" plane through (2.8, 0, 0) normal (1, 0, 0) x (0, 0, -1)
  circle A0 centre (0, 0) radius 34.0862
  circle A1 centre (0, 0) radius 115.853
extrude "押し出し6" cut sketch "スケッチ7" along normal mid plane 10
properties part number "KANA40A52D17_6-D25_PCD124.6(H 7 D 0/+0.1 25 N/A)"
